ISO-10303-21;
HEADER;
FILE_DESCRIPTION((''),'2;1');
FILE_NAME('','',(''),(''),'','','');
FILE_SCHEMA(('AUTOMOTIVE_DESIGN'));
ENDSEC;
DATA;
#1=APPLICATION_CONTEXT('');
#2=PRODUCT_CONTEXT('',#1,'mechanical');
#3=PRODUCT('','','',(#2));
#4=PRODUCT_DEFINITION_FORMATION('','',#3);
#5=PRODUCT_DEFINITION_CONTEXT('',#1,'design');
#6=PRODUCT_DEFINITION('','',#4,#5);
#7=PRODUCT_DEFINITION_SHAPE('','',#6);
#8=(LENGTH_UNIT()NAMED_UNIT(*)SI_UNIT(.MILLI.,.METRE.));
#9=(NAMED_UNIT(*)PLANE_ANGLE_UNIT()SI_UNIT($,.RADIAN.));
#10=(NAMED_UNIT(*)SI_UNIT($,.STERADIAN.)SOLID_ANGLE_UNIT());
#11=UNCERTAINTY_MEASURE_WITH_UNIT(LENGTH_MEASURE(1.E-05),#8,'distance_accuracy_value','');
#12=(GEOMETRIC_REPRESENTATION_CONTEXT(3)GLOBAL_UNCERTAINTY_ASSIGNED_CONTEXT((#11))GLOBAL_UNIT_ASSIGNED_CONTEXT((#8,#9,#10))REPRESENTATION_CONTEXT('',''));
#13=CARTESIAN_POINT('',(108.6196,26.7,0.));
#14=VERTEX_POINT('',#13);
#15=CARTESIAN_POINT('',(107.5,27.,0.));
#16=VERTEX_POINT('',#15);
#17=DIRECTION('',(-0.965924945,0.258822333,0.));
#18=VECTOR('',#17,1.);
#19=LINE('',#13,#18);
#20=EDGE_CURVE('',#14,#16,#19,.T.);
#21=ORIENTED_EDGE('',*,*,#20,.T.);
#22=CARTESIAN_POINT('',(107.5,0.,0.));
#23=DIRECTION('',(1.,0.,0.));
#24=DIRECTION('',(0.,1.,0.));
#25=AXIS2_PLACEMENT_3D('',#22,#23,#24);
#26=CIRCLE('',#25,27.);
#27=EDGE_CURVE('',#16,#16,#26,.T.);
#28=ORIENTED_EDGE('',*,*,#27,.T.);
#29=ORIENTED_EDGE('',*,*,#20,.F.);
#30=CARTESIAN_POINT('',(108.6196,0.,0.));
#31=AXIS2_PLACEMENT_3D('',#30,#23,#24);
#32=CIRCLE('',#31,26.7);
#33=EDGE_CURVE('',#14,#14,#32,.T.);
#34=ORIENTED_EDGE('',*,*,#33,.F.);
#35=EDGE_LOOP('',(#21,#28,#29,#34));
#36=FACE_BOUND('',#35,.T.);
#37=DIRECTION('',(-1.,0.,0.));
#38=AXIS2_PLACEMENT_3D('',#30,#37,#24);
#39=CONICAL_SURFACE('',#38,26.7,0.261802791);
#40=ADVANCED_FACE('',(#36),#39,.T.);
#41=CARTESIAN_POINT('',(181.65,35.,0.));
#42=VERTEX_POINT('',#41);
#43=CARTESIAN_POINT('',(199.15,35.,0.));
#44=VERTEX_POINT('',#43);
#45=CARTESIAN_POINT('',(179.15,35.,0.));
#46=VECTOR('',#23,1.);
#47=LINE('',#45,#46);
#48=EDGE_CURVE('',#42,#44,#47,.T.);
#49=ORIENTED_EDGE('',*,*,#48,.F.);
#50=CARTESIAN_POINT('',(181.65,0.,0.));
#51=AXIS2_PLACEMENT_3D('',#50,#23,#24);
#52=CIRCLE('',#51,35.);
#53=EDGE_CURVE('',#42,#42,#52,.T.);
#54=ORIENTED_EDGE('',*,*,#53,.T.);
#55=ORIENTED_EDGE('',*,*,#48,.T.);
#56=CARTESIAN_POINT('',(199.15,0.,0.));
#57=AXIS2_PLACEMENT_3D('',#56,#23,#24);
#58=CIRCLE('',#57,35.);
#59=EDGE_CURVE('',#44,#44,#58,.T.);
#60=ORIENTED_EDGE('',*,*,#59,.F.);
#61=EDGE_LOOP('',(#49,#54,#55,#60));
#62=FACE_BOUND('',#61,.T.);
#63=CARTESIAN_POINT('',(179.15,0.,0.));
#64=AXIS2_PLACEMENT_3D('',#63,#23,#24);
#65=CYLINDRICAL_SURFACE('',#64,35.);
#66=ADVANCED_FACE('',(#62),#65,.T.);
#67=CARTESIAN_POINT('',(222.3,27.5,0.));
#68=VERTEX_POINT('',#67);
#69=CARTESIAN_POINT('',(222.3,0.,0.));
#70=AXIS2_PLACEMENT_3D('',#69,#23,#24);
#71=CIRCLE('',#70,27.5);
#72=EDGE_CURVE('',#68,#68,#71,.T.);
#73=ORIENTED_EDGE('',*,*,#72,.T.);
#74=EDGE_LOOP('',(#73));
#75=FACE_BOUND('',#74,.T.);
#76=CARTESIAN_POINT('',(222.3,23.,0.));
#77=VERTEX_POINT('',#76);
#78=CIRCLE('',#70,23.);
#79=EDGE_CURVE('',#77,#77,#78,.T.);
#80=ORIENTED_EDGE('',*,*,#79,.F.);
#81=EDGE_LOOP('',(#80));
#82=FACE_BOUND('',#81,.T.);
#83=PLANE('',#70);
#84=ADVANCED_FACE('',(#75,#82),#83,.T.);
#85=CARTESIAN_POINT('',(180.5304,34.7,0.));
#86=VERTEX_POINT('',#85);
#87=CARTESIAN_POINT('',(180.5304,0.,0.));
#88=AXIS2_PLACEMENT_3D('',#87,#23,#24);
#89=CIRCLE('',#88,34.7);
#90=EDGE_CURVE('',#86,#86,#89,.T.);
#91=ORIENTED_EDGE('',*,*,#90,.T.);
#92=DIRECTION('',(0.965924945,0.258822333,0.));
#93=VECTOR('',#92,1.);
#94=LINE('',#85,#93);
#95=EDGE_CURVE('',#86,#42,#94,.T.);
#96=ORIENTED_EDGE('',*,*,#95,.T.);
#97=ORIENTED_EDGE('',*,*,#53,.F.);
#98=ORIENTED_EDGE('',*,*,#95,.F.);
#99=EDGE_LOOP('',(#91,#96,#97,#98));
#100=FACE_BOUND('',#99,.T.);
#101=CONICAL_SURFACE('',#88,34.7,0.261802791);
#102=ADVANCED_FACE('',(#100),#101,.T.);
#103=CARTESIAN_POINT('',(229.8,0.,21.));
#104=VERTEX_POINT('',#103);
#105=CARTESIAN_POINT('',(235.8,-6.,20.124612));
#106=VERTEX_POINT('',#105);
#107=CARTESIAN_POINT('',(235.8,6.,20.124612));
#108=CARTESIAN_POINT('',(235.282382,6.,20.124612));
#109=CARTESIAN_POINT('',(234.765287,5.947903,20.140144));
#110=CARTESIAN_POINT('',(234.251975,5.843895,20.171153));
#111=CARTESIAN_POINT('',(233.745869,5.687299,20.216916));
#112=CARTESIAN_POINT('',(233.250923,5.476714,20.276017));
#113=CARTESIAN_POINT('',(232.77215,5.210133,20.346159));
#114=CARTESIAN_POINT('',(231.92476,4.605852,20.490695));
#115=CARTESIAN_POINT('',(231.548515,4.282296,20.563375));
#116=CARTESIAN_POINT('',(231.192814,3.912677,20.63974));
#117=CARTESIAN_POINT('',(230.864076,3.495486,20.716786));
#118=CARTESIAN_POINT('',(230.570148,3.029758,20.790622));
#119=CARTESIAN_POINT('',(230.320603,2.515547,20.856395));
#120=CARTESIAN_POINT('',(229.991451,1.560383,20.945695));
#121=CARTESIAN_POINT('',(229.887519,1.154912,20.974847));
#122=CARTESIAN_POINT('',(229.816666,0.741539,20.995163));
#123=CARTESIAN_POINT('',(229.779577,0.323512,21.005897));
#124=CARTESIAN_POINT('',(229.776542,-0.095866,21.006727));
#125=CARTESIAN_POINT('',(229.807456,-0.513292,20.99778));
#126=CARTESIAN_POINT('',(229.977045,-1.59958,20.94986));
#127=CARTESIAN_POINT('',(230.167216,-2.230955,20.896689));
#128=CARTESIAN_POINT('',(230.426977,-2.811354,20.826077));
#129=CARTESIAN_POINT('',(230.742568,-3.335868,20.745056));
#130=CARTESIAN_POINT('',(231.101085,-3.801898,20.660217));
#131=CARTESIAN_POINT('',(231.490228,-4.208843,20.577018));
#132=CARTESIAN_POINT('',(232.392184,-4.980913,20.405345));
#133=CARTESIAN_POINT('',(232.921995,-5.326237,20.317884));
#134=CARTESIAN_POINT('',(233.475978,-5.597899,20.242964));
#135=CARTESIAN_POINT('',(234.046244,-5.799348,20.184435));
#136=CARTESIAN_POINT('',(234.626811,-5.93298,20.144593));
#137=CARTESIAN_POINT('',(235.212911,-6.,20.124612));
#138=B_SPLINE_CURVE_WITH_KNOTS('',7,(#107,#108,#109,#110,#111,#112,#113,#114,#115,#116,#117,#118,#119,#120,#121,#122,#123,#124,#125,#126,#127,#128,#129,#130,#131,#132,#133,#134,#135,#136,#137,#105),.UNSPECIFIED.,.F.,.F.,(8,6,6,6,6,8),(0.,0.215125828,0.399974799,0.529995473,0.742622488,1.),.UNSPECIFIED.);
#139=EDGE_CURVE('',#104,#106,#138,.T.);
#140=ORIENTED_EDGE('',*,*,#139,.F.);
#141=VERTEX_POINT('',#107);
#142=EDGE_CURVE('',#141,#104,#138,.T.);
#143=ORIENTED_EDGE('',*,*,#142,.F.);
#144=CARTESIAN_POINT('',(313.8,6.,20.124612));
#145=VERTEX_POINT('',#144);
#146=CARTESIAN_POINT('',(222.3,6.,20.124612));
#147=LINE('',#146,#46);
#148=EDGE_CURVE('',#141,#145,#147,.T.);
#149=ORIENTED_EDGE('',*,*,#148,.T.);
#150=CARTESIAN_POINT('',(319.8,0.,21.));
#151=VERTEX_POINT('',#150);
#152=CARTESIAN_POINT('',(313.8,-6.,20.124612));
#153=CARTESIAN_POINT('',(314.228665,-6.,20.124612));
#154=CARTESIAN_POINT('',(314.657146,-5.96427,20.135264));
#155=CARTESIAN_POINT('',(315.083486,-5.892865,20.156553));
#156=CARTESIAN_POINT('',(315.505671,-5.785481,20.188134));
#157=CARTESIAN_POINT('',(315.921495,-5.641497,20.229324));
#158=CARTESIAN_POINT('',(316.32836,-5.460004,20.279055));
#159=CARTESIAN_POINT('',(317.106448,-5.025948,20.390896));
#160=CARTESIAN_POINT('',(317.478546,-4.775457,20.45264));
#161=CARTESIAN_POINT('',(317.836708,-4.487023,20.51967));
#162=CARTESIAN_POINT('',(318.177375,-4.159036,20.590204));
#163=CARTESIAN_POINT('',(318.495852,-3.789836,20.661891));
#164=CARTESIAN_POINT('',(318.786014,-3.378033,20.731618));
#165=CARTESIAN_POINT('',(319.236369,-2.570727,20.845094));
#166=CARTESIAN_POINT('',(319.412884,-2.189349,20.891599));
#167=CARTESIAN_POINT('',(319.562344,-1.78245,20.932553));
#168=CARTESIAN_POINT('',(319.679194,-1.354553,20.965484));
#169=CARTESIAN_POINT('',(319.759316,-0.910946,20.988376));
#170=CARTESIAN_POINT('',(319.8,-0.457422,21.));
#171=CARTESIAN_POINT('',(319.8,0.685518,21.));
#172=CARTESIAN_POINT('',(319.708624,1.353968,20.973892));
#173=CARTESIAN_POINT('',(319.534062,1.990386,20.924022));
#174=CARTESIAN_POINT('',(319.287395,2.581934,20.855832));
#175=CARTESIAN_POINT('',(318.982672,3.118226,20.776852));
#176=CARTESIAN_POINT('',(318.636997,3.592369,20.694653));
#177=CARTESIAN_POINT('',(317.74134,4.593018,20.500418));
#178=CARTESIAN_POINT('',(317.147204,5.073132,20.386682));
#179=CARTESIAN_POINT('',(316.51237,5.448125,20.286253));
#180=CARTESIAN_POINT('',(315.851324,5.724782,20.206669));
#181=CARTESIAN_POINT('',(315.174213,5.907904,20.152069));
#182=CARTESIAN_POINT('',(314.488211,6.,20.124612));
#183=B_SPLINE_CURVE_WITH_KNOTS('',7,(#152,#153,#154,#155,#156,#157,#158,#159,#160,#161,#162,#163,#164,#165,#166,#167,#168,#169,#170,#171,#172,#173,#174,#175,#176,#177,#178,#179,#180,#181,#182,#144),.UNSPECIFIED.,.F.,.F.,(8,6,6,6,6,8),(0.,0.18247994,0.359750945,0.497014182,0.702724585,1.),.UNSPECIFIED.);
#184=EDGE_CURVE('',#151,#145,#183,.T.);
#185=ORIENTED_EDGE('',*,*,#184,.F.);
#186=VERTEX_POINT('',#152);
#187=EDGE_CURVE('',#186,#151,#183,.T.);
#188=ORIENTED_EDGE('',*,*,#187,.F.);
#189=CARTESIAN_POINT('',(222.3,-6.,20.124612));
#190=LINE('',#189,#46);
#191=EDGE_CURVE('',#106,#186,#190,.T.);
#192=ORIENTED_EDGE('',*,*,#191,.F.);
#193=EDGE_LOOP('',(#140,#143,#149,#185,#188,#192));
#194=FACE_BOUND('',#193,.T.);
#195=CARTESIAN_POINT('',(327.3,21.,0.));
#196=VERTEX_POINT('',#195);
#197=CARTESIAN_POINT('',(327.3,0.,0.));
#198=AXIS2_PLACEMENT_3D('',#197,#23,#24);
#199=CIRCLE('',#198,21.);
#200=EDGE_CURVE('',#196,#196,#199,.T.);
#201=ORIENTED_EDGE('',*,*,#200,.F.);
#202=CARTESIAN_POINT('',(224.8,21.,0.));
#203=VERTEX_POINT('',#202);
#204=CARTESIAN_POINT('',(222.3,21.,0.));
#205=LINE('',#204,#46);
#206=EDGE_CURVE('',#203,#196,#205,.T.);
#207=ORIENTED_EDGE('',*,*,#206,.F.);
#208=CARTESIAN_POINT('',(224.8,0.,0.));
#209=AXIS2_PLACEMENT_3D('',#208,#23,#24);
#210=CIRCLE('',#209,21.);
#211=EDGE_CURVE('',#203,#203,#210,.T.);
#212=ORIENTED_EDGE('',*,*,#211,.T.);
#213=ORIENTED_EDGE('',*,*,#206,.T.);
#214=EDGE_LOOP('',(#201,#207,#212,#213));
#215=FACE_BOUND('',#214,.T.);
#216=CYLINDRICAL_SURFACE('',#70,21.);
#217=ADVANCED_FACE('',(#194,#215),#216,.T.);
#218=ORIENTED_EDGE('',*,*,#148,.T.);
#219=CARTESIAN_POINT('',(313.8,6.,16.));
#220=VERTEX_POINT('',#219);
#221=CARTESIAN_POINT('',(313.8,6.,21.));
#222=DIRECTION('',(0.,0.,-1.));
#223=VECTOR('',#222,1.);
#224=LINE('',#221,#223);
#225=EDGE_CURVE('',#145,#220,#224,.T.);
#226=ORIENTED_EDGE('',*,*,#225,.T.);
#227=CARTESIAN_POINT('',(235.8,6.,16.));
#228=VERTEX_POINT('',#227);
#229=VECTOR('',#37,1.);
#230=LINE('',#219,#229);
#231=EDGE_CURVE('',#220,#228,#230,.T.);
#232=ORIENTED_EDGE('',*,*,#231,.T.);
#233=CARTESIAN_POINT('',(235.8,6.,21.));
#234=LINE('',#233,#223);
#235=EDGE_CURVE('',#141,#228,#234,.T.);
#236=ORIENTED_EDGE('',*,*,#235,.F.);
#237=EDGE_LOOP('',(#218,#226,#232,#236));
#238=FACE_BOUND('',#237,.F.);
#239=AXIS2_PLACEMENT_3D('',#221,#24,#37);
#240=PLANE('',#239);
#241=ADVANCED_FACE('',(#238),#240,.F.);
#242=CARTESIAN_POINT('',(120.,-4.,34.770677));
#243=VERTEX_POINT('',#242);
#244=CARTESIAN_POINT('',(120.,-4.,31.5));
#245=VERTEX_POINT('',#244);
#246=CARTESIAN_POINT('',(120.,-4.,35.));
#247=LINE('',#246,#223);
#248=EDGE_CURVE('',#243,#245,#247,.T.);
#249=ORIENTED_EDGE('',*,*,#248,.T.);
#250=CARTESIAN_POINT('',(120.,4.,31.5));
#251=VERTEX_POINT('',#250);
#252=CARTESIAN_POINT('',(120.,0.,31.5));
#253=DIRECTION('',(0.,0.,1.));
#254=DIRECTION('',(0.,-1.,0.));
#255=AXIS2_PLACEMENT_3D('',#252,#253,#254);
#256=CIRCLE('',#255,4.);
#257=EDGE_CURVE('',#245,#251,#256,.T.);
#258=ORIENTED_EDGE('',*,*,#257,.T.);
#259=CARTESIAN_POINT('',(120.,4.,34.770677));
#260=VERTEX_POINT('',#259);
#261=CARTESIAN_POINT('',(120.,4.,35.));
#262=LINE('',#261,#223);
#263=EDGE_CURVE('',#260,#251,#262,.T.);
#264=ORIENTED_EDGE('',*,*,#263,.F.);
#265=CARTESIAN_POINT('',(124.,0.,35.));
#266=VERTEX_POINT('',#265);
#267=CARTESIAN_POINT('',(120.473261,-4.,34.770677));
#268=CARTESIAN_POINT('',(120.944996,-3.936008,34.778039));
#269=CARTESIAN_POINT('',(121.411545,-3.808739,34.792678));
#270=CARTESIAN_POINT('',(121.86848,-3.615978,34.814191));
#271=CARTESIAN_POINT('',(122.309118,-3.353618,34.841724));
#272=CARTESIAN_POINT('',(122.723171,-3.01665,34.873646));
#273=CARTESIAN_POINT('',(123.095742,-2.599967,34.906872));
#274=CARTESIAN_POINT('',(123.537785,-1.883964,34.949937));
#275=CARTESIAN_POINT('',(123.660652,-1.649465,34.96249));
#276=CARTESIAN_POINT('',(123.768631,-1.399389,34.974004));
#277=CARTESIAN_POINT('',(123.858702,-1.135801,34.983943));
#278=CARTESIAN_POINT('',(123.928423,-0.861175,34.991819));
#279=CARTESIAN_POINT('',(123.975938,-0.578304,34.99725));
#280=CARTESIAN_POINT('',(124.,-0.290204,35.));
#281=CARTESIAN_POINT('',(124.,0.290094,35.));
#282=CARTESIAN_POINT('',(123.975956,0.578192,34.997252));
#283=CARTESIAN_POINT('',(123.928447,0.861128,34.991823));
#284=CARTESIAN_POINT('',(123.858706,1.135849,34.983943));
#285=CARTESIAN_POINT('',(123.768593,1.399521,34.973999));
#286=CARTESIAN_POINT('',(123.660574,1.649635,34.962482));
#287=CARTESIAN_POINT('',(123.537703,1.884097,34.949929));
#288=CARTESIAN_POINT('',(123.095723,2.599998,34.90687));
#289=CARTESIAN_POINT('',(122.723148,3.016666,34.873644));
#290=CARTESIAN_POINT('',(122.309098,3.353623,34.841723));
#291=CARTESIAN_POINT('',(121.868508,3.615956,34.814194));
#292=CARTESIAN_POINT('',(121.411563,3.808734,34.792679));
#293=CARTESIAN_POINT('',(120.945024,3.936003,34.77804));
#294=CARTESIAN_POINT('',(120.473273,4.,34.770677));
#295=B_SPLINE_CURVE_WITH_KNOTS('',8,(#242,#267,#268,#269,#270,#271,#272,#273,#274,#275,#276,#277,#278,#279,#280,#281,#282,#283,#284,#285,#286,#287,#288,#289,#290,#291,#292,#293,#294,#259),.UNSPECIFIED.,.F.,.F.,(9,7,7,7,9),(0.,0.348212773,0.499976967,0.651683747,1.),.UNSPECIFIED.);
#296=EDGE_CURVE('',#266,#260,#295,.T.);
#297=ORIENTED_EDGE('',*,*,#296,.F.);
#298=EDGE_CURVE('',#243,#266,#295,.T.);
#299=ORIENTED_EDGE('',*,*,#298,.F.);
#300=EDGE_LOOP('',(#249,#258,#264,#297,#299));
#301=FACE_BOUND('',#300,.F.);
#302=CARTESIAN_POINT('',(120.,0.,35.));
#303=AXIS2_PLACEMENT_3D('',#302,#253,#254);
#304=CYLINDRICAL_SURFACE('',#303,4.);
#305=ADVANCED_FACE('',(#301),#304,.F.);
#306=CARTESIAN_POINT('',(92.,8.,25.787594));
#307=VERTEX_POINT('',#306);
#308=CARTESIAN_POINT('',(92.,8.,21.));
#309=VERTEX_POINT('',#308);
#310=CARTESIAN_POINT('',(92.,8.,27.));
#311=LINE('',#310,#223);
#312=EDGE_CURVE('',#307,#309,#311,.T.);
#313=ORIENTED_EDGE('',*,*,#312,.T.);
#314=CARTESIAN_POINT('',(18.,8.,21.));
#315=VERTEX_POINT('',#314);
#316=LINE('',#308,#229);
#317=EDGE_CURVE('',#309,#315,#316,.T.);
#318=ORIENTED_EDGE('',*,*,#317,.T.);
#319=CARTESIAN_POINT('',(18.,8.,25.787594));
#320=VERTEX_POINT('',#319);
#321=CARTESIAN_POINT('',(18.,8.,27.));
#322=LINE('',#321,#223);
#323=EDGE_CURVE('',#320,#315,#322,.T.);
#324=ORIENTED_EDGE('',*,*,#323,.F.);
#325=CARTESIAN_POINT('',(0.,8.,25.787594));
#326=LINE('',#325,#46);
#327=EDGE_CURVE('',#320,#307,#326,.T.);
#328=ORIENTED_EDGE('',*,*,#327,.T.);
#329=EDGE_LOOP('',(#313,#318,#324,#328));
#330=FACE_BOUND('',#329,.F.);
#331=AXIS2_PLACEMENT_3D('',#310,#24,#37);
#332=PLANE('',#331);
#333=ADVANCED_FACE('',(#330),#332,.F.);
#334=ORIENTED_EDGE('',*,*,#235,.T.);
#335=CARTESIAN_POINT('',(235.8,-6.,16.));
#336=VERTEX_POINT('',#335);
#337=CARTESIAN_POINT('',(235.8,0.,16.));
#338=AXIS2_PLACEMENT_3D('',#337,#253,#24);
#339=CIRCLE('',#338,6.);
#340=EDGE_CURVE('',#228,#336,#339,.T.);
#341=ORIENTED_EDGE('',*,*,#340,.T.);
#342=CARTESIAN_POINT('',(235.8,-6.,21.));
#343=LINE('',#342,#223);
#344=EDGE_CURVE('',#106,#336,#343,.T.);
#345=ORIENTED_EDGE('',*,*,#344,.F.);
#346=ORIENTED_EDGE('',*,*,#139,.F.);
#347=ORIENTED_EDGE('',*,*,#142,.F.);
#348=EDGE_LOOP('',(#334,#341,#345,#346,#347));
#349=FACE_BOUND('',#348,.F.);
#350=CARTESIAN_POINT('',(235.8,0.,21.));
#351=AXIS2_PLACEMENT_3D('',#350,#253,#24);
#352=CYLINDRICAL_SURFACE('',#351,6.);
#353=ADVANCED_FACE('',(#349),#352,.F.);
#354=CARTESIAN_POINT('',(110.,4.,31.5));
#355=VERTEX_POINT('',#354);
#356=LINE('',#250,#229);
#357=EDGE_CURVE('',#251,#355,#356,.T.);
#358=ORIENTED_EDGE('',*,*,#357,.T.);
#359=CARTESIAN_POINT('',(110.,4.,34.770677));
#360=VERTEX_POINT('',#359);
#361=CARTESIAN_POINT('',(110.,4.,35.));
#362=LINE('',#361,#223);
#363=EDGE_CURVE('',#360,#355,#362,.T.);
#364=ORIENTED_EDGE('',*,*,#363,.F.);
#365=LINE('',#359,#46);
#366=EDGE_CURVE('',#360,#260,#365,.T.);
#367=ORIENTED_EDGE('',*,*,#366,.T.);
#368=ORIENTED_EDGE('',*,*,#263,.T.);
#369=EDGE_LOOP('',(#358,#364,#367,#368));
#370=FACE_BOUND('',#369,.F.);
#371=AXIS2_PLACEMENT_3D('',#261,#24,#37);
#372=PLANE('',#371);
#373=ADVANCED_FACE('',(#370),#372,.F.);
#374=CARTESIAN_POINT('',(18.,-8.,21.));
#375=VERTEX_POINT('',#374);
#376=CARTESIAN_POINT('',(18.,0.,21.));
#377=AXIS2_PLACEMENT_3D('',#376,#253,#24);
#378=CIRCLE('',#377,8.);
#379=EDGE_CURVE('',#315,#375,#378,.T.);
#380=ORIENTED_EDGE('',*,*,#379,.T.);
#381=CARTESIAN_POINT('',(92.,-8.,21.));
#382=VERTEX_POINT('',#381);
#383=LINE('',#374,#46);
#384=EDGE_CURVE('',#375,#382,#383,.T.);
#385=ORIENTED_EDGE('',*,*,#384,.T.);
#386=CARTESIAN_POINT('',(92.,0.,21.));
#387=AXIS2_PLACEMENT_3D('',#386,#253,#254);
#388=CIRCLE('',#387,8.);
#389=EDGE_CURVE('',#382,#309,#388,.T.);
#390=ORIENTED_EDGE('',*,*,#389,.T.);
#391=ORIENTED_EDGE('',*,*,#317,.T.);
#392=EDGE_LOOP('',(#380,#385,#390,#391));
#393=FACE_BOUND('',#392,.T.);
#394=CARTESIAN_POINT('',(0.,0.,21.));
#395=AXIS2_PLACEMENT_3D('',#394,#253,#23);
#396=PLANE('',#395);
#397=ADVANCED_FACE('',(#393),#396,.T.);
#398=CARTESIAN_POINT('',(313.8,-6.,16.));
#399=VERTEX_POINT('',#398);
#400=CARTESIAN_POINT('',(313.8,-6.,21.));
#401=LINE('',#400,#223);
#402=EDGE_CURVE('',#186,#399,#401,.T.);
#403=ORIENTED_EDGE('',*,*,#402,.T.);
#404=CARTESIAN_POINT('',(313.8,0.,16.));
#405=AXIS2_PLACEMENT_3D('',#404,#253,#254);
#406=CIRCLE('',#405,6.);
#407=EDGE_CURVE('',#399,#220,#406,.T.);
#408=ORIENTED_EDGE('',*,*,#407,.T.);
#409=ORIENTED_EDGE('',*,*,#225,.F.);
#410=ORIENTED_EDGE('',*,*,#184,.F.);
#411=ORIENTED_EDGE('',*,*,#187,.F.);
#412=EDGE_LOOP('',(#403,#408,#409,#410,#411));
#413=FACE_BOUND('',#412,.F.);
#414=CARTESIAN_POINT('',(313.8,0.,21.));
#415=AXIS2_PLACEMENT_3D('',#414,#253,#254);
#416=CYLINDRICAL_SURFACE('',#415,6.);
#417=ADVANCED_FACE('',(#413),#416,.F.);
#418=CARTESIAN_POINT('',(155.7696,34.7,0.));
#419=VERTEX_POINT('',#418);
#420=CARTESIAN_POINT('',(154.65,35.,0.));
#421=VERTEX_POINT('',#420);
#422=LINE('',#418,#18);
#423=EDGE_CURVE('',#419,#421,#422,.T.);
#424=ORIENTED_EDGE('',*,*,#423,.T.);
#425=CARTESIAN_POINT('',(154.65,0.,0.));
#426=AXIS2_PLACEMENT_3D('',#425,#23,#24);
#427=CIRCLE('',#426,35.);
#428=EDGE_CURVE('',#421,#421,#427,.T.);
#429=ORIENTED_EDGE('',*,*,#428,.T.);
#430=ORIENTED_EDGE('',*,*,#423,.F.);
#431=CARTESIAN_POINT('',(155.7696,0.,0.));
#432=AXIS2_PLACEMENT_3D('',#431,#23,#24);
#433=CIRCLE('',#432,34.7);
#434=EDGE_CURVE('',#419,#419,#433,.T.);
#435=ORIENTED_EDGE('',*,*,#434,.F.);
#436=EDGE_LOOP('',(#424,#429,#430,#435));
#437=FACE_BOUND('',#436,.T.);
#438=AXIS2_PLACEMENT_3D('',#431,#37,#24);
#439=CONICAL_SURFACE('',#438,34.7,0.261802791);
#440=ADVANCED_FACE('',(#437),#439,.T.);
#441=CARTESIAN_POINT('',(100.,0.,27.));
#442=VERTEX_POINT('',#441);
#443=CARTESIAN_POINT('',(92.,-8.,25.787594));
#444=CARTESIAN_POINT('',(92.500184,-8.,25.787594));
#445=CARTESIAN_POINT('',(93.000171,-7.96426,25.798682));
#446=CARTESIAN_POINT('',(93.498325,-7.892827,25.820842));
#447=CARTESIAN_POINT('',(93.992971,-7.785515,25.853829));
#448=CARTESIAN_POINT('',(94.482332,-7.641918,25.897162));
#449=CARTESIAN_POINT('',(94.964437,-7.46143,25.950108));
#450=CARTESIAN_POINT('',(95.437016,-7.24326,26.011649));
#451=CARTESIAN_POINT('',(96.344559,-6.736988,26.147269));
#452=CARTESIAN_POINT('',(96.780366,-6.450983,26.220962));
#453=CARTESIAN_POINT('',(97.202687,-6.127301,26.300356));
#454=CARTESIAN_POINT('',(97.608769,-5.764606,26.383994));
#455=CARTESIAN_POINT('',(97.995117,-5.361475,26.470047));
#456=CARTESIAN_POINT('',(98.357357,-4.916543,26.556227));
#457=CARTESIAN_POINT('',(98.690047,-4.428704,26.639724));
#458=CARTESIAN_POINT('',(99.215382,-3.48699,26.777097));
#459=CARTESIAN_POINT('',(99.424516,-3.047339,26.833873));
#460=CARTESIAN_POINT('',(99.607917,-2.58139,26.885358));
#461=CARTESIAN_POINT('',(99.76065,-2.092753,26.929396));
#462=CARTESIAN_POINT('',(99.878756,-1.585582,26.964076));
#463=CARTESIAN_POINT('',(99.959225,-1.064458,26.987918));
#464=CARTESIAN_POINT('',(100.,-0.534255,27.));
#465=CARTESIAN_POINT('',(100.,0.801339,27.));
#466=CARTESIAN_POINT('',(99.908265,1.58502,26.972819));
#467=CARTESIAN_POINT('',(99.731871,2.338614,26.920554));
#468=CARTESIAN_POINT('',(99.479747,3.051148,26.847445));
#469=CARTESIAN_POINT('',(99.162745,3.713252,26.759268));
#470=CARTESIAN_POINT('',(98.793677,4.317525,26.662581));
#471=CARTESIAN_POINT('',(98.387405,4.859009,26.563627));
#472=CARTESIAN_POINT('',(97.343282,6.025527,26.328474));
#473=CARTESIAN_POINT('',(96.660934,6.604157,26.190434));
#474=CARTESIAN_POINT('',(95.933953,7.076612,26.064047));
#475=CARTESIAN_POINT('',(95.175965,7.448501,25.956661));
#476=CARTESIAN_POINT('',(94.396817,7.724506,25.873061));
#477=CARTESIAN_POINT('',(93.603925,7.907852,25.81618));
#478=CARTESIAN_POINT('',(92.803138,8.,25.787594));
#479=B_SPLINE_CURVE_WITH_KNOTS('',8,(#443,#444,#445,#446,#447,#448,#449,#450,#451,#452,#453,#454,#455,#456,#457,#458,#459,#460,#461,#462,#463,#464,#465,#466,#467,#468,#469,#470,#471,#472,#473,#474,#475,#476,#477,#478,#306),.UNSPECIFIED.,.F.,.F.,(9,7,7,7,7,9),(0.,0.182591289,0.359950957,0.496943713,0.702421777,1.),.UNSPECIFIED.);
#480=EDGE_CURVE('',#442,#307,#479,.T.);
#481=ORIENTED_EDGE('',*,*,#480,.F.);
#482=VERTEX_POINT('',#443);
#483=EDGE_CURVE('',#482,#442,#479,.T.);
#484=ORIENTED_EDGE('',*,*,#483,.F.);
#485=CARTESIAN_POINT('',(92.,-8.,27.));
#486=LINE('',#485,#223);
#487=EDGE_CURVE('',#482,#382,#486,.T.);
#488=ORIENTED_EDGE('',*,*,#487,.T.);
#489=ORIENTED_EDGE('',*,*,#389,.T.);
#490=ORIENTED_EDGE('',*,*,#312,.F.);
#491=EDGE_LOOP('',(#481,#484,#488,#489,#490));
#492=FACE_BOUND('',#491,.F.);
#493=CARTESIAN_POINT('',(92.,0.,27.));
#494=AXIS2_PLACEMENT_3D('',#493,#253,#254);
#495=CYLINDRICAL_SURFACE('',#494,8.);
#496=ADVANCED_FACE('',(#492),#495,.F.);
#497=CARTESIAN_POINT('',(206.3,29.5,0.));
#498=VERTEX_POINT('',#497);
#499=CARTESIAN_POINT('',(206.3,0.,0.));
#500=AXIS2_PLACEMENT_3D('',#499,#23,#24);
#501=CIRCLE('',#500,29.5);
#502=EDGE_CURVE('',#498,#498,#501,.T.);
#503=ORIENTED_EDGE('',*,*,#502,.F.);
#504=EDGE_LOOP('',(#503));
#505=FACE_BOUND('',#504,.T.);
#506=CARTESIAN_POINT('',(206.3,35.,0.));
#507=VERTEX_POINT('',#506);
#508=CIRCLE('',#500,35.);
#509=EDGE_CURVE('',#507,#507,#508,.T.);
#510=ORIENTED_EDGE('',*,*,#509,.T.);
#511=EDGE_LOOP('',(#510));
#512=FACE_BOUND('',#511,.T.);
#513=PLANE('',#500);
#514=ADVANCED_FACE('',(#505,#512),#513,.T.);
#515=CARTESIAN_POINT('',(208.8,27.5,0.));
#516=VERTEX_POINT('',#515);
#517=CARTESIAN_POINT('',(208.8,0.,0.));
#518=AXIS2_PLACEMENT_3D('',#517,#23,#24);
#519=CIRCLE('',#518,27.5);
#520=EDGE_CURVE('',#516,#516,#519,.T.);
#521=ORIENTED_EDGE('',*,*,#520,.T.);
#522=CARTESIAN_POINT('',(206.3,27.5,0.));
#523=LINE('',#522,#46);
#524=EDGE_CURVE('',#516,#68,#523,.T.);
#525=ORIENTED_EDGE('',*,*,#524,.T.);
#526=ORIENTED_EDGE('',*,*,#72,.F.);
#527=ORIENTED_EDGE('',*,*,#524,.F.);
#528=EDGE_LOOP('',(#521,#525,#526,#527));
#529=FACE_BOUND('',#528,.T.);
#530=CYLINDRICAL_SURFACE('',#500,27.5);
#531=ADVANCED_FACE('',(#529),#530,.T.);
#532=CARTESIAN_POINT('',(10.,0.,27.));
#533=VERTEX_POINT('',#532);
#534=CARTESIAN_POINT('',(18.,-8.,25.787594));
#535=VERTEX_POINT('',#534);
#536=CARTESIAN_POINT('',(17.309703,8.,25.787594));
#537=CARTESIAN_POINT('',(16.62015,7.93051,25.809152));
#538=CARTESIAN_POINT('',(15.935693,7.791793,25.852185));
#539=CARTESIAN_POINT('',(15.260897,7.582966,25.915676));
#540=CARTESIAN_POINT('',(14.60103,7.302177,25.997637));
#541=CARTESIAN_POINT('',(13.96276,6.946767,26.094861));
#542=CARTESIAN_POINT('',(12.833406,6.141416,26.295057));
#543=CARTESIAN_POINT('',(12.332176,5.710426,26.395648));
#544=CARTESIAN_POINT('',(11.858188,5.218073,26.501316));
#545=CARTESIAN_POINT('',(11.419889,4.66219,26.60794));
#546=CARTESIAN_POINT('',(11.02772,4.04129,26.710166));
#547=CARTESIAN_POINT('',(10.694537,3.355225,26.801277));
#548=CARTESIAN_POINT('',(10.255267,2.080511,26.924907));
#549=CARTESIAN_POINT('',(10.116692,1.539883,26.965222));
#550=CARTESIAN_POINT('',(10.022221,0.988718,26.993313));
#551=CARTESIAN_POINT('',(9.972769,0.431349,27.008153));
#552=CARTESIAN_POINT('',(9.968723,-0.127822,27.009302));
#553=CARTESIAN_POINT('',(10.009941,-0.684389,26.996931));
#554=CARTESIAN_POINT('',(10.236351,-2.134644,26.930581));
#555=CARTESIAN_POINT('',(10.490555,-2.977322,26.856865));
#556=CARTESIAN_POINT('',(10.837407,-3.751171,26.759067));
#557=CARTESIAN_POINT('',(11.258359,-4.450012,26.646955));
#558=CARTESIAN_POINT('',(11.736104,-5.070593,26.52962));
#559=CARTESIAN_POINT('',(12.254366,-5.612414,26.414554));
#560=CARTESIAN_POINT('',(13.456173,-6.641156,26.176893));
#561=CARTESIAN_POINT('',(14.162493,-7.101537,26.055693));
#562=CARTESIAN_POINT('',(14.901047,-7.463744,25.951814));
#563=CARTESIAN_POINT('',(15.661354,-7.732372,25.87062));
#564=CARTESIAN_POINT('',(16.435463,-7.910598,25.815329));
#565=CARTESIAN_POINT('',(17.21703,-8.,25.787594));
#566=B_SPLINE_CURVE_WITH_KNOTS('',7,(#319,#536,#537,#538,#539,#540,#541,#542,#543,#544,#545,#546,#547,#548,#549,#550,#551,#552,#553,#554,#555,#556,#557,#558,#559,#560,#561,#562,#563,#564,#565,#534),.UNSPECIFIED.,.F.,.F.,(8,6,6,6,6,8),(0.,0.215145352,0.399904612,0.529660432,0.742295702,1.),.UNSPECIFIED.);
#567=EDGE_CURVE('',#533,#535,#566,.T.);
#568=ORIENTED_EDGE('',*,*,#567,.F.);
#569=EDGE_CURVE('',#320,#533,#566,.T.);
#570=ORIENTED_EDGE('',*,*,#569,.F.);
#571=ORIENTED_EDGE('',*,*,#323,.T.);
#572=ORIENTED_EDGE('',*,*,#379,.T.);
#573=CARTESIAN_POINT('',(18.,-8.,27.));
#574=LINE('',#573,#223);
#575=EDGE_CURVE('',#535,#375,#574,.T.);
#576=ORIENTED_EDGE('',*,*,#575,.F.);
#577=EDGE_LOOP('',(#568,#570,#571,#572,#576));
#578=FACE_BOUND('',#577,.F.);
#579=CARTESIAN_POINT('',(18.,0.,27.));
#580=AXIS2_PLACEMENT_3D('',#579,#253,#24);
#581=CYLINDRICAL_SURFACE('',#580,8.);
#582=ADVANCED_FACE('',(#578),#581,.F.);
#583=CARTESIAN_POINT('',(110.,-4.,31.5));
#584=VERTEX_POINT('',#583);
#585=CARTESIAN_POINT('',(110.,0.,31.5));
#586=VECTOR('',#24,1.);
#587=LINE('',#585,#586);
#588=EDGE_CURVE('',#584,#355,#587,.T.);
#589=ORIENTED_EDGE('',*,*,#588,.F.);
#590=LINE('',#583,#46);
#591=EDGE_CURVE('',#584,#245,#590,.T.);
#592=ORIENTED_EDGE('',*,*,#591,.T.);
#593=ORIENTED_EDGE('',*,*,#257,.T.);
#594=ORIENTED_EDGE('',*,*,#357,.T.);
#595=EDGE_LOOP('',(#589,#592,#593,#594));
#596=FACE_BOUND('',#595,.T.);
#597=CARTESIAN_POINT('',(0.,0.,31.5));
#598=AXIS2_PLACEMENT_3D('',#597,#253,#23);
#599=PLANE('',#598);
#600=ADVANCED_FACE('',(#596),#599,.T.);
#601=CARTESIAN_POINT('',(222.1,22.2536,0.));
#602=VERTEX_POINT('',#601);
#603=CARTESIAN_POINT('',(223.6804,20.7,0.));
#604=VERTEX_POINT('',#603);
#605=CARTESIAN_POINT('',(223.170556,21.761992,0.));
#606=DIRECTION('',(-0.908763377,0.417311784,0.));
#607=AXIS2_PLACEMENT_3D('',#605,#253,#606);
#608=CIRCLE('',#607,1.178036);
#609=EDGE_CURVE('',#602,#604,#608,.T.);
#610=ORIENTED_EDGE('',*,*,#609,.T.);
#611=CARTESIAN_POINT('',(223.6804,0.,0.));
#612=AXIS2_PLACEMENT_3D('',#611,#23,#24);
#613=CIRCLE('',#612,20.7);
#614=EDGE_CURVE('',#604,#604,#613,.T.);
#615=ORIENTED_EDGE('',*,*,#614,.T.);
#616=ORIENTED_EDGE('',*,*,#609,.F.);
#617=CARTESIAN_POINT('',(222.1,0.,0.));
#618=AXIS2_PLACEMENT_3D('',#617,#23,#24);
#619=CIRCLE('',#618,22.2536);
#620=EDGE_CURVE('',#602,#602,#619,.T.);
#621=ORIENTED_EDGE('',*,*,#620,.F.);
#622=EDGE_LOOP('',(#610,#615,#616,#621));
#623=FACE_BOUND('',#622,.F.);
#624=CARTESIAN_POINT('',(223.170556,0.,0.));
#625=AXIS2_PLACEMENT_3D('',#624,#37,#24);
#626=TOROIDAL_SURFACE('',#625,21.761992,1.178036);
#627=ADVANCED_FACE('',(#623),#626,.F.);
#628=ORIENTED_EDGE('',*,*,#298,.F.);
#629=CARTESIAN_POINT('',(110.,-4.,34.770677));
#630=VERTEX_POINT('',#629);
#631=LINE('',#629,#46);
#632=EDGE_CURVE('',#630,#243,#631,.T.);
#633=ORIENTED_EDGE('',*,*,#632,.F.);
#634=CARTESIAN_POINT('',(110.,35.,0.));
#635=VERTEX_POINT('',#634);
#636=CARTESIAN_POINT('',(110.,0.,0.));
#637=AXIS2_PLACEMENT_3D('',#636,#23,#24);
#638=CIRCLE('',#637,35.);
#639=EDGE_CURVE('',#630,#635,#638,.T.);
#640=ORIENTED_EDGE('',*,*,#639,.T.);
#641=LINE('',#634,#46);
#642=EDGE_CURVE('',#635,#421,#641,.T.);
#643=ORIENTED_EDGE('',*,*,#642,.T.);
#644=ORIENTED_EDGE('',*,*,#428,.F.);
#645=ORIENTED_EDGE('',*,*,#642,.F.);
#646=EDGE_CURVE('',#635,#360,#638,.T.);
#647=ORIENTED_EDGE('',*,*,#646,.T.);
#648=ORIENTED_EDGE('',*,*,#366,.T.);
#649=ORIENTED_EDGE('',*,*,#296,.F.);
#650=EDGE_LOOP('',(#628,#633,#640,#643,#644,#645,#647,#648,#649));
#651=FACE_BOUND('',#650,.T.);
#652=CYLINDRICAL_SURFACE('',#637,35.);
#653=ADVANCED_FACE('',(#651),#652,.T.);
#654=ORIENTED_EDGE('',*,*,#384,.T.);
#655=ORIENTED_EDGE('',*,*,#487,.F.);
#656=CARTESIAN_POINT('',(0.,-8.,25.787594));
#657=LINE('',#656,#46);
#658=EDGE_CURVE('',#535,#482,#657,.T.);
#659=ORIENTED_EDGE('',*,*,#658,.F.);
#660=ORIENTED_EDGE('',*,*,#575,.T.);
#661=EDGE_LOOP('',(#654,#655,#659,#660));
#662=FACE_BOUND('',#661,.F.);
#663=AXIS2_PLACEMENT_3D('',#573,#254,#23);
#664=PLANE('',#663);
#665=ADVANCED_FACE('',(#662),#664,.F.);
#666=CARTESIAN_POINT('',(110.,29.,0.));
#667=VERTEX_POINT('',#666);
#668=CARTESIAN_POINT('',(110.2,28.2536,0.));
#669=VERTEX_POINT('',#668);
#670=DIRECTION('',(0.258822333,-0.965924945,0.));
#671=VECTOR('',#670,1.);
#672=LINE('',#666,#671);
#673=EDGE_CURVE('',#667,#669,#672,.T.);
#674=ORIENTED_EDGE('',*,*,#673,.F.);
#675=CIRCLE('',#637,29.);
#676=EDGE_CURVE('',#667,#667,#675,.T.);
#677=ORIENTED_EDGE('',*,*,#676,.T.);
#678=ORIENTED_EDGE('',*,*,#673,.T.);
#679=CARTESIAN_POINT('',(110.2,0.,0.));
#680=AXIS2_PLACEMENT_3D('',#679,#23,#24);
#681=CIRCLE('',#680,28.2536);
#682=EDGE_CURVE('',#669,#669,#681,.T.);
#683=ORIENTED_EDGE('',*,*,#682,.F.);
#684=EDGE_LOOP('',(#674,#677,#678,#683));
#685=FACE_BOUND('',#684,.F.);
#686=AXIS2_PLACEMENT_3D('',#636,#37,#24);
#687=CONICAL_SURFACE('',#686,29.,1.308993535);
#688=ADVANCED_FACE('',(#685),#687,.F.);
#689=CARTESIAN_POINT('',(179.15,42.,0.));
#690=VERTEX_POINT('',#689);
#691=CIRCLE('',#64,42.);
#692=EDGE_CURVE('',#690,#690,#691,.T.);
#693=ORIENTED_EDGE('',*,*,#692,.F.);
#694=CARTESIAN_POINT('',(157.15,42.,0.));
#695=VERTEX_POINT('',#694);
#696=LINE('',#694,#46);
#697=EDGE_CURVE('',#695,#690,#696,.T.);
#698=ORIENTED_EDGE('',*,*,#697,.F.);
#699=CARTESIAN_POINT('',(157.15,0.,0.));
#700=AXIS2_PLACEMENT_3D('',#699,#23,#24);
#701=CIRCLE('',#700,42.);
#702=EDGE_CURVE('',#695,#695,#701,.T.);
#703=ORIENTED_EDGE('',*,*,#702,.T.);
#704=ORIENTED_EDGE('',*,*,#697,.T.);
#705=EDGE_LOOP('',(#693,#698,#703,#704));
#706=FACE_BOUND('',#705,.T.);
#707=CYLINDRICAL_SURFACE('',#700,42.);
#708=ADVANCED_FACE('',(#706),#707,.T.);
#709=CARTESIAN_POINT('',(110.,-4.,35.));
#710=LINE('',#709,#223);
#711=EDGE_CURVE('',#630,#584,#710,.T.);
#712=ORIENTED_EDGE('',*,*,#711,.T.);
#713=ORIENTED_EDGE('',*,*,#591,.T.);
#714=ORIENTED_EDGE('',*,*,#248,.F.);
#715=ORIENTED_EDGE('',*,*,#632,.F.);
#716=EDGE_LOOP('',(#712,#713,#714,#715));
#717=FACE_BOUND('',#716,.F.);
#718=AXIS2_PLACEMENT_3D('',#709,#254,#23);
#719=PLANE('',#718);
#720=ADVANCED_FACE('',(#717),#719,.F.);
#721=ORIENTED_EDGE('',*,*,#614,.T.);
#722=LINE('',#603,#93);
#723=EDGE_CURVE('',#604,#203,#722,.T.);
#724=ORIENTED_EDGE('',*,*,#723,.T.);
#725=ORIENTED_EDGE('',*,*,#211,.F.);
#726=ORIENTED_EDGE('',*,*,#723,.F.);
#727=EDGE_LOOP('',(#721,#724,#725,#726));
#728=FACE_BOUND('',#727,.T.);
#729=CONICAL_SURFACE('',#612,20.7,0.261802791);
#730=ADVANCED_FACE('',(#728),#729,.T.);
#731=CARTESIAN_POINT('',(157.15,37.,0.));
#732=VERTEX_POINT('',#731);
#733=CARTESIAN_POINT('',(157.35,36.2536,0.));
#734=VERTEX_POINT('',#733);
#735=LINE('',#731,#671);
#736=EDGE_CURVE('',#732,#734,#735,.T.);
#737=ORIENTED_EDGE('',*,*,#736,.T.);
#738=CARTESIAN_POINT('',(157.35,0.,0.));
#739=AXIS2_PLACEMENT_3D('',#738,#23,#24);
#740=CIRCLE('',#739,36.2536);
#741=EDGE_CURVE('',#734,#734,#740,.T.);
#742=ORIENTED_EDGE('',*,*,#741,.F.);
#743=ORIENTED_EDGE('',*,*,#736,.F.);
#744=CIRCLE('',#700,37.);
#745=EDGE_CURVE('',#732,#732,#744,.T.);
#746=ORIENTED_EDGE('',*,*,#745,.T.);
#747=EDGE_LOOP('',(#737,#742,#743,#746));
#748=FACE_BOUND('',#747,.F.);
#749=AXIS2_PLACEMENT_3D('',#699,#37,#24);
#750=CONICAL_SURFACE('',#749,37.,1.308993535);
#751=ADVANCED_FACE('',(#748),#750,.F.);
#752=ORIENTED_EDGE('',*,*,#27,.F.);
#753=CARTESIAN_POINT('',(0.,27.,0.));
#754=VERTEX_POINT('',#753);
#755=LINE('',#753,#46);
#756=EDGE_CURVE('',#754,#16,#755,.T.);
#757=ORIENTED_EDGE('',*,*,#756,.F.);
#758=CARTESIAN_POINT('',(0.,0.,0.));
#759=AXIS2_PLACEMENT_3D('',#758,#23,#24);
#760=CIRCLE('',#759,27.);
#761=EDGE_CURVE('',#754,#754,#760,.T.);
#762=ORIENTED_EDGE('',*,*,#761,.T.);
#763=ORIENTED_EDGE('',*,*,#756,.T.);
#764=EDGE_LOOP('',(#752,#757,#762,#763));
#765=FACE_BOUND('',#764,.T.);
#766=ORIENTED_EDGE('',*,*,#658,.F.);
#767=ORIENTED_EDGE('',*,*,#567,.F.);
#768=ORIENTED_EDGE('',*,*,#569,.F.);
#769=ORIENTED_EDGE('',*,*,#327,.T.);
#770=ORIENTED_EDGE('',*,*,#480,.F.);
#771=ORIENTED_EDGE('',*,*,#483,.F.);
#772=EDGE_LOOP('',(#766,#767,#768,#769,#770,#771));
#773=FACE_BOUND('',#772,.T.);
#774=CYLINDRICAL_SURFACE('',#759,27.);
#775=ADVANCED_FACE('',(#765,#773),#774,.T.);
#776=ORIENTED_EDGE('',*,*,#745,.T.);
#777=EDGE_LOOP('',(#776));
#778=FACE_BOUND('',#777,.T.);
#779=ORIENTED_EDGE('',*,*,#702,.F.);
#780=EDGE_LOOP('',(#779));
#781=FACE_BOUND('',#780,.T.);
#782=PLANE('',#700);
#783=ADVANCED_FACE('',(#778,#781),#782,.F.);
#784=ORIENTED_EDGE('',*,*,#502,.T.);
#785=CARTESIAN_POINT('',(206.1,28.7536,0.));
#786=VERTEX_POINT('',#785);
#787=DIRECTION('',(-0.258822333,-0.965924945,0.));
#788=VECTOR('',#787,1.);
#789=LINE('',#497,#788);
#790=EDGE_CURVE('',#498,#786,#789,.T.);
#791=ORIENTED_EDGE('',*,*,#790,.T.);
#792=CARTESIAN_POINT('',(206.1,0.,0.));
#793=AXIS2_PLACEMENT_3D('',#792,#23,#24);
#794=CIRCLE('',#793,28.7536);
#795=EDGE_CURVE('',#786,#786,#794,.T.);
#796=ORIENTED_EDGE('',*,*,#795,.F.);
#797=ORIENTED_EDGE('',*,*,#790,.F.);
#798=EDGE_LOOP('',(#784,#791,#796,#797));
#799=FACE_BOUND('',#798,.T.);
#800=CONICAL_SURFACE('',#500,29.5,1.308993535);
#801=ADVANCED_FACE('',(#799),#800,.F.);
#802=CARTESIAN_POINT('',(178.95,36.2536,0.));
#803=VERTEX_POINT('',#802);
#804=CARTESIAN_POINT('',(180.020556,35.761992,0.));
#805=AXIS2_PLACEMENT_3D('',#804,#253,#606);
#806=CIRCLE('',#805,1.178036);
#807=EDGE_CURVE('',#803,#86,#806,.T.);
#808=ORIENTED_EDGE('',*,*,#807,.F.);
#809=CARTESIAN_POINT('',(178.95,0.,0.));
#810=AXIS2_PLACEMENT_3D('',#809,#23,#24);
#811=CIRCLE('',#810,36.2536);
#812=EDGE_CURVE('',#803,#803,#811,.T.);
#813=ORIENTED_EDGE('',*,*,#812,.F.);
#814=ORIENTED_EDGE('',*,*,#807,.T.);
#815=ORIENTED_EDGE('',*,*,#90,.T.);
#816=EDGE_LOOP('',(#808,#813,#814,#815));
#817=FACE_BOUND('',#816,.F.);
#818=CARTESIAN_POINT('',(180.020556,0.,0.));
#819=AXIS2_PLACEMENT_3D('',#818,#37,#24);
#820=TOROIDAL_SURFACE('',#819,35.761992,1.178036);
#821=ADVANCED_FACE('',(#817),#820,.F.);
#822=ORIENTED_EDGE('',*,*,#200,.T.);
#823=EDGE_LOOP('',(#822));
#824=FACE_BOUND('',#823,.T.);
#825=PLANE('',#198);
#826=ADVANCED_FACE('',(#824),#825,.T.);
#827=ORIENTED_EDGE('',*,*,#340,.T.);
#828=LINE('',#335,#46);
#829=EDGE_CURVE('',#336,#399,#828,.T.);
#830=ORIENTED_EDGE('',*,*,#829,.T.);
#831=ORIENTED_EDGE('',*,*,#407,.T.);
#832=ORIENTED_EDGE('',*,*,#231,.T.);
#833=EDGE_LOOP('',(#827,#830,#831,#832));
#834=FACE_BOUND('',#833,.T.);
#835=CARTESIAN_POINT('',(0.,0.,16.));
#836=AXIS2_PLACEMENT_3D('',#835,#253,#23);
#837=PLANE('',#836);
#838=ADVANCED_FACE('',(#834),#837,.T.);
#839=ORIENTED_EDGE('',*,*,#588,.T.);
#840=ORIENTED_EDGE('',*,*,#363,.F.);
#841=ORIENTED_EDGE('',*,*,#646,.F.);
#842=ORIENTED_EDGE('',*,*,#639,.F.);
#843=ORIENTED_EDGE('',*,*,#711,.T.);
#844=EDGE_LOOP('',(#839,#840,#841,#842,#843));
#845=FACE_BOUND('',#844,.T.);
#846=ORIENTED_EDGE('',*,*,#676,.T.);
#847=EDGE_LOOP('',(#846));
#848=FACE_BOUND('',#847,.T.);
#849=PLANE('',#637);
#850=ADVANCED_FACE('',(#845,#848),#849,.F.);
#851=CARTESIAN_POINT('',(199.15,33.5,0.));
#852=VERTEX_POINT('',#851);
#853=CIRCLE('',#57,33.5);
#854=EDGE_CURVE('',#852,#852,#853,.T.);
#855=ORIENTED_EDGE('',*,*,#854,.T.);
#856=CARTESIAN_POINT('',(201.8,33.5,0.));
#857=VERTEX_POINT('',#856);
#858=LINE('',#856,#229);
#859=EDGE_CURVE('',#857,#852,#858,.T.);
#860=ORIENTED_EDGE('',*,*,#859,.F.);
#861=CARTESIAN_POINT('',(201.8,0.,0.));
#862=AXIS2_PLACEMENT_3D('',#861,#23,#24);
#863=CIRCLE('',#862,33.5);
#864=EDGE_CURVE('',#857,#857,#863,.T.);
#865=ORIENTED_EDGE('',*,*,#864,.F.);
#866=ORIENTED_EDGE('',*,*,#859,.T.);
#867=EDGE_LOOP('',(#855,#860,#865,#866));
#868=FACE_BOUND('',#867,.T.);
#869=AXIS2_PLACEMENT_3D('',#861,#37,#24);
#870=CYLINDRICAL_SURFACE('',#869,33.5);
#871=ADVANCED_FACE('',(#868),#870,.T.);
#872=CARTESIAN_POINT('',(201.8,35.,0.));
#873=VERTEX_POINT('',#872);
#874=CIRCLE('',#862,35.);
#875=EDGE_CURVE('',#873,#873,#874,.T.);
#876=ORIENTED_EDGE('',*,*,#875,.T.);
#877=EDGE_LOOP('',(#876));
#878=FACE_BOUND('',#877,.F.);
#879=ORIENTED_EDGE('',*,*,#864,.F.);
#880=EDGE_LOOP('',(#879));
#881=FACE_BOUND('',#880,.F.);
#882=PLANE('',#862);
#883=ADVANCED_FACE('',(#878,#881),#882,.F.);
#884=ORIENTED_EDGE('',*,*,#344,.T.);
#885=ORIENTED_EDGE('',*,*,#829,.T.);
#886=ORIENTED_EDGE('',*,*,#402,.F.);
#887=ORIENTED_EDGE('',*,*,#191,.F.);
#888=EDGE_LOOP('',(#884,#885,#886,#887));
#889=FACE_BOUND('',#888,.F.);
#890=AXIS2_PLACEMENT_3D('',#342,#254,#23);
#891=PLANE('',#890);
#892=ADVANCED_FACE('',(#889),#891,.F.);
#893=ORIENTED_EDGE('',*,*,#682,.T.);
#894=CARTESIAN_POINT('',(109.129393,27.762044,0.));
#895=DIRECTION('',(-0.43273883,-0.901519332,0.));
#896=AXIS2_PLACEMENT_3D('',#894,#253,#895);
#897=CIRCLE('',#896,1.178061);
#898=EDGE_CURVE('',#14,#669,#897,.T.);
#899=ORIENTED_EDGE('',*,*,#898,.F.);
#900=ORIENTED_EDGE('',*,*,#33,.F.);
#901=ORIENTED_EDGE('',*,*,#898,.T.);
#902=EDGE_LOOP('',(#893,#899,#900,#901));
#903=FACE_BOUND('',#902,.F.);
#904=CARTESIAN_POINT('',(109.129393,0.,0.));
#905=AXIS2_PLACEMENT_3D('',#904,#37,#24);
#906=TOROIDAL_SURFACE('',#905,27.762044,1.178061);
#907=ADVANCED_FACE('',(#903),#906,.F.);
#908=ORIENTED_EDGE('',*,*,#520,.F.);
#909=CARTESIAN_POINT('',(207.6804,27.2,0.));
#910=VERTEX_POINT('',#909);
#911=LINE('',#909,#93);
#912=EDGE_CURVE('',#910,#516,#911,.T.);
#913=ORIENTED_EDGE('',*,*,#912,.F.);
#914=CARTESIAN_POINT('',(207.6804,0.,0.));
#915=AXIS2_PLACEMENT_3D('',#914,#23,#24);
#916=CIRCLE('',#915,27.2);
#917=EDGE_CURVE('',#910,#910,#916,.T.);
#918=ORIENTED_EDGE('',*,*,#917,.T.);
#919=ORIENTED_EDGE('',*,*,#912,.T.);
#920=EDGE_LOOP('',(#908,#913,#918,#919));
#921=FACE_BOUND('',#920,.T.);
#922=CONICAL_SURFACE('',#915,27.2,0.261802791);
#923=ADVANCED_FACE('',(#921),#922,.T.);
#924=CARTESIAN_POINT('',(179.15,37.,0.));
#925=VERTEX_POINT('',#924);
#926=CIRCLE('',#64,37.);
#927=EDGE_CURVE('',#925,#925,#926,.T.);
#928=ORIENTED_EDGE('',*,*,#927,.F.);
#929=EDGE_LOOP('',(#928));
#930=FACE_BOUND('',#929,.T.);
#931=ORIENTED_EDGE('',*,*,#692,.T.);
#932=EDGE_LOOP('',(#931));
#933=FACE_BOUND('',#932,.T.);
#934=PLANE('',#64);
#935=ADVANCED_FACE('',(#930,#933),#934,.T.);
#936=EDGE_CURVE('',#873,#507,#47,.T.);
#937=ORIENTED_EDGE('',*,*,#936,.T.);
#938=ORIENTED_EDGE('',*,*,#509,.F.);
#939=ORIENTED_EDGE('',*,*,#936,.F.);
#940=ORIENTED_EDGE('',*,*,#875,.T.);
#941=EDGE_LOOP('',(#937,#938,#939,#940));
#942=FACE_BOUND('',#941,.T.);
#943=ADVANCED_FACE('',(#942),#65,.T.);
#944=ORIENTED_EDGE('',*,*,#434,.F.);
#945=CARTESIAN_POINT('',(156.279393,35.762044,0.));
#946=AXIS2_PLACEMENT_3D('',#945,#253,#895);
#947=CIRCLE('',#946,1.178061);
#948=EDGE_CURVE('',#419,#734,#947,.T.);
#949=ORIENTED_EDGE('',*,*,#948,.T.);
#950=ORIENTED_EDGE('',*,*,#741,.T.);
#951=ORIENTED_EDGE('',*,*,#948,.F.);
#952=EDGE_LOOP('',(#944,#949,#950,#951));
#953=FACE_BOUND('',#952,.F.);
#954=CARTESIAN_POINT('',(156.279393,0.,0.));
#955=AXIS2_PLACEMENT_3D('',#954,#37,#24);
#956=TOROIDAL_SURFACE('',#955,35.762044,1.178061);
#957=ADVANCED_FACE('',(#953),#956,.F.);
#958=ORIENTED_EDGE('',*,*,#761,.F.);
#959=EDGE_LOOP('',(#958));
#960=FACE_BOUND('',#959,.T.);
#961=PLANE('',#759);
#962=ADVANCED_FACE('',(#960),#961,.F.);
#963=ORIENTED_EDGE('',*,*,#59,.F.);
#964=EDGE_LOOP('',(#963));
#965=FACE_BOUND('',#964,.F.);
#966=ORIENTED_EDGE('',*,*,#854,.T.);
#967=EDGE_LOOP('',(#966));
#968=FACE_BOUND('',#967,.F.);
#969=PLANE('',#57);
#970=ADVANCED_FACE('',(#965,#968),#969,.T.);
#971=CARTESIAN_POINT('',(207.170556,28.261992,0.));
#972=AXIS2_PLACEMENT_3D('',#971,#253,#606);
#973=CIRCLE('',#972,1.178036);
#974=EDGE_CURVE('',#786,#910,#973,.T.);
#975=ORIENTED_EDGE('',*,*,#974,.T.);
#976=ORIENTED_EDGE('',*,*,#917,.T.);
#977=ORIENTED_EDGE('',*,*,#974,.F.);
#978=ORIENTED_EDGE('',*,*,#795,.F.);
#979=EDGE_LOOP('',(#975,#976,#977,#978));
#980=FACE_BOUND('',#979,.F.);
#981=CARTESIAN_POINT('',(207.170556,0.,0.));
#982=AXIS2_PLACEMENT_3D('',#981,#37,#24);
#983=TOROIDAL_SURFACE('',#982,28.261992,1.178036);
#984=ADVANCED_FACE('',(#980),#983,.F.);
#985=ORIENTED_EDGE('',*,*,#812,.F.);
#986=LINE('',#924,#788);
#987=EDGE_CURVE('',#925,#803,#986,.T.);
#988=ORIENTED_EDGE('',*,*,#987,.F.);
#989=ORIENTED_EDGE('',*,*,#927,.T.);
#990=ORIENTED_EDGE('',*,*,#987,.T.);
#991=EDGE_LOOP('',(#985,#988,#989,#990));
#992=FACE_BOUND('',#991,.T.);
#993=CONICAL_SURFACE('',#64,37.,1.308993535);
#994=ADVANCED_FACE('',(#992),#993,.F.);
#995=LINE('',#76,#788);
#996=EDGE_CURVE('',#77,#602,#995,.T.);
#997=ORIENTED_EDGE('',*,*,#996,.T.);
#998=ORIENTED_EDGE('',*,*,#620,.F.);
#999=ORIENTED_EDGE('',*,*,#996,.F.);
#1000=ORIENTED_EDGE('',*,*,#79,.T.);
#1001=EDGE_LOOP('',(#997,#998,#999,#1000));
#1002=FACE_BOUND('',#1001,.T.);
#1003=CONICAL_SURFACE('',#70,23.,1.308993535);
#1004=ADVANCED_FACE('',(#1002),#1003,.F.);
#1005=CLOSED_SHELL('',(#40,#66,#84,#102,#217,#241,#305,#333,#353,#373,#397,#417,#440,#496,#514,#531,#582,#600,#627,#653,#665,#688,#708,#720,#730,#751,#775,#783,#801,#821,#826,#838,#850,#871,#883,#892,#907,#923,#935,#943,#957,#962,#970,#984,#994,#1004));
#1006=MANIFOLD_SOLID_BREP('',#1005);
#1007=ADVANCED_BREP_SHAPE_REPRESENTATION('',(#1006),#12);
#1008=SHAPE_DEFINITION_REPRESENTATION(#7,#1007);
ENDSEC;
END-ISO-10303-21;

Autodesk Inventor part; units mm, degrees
ref_plane "YZ Plane" through (0, 0, 0) normal (1, 0, 0) x (0, 1, 0)
ref_plane "XZ Plane" through (0, 0, 0) normal (0, 1, 0) x (-1, 0, 0)
sketch "Skizze32" plane through (0, 0, 0) normal (0, 0, 1) x (1, 0, 0)
  line L0 (0, 0) -> (0, 27)
  line L1 (0, 27) -> (110, 27)
  line L2 (110, 27) -> (110, 35)
  line L3 (110, 35) -> (157.15, 35)
  line L4 (157.15, 35) -> (157.15, 42)
  line L5 (157.15, 42) -> (179.15, 42)
  line L6 (179.15, 42) -> (179.15, 35)
  line L7 (179.15, 35) -> (206.3, 35)
  line L8 (206.3, 35) -> (206.3, 27.5)
  line L9 (206.3, 27.5) -> (222.3, 27.5)
  line L10 (222.3, 27.5) -> (222.3, 21)
  line L11 (222.3, 21) -> (327.3, 21)
  line L12 (327.3, 21) -> (327.3, 0)
  line L13 (327.3, 0) -> (0, 0)
  line L14 (-65.46, 0) -> (392.76, 0) projected
revolve "Umdrehung28" add sketch "Skizze32" angle 360 about axis through (-10, 0, 0) along (1, 0, 0)
ref_plane "Arbeitsebene5" through (0, 0, 27) normal (0, 0, 1) x (1, 0, 0)
sketch "Skizze33" plane through (0, 0, 27) normal (0, 0, 1) x (1, 0, 0)
  line L0 (10, 0) -> (100, 0) construction
  line L1 (18, -8) -> (92, -8)
  line L2 (92, 8) -> (18, 8)
  arc A0 (18, 8) -> (18, -8) centre (18, 0) ccw
  arc A1 (92, -8) -> (92, 8) centre (92, 0) ccw
  point P0 (55, 0)
extrude "Extrusion5" cut sketch "Skizze33" against normal blind 6
sketch "Skizze34" plane through (0, 0, 0) normal (0, 0, 1) x (1, 0, 0)
  line L0 (110, 29) -> (110.2, 28.2536)
  line L1 (108.6196, 26.7) -> (107.5, 27)
  line L2 (107.5, 27) -> (107.5, 29)
  line L3 (107.5, 29) -> (110, 29)
  arc A0 (108.6196, 26.7) -> (110.2, 28.2536) centre (109.1294, 27.762) ccw
  line L4 (-65.46, 0) -> (392.76, 0) projected
revolve "Umdrehung29" cut sketch "Skizze34" angle 360 about axis through (-10, 0, 0) along (1, 0, 0)
sketch "Skizze35" plane through (0, 0, 0) normal (0, 0, 1) x (1, 0, 0)
  line L0 (157.15, 37) -> (157.35, 36.2536)
  line L1 (155.7696, 34.7) -> (154.65, 35)
  line L2 (154.65, 35) -> (154.65, 37)
  line L3 (154.65, 37) -> (157.15, 37)
  arc A0 (155.7696, 34.7) -> (157.35, 36.2536) centre (156.2794, 35.762) ccw
  line L4 (-65.46, 0) -> (392.76, 0) projected
revolve "Umdrehung30" cut sketch "Skizze35" angle 360 about axis through (-10, 0, 0) along (1, 0, 0)
thread "Gewinde1" size "M70x2" class "6g" standard "ISO Metric profile" length 14
ref_plane "Arbeitsebene6" through (0, 0, 35) normal (0, 0, 1) x (1, 0, 0)
sketch "Skizze36" plane through (0, 0, 35) normal (0, 0, 1) x (1, 0, 0)
  line L0 (106, 0) -> (124, 0) construction
  line L1 (110, -4) -> (120, -4)
  line L2 (120, 4) -> (110, 4)
  arc A0 (110, 4) -> (110, -4) centre (110, 0) ccw
  arc A1 (120, -4) -> (120, 4) centre (120, 0) ccw
  point P0 (115, 0)
extrude "Extrusion6" cut sketch "Skizze36" against normal blind 3.5
sketch "Skizze37" plane through (0, 0, 0) normal (0, 0, 1) x (1, 0, 0)
  line L0 (201.8, 33.5) -> (199.15, 33.5)
  line L1 (199.15, 33.5) -> (199.15, 35)
  line L2 (199.15, 35) -> (201.8, 35)
  line L3 (201.8, 35) -> (201.8, 33.5)
  line L4 (-65.46, 0) -> (392.76, 0) projected
revolve "Umdrehung31" cut sketch "Skizze37" angle 360 about axis through (-10, 0, 0) along (1, 0, 0)
sketch "Skizze38" plane through (0, 0, 0) normal (0, 0, 1) x (1, 0, 0)
  line L0 (179.15, 37) -> (178.95, 36.2536)
  line L1 (180.5304, 34.7) -> (181.65, 35)
  line L2 (181.65, 35) -> (181.65, 37)
  line L3 (181.65, 37) -> (179.15, 37)
  arc A0 (178.95, 36.2536) -> (180.5304, 34.7) centre (180.0206, 35.762) ccw
  line L4 (-65.46, 0) -> (392.76, 0) projected
revolve "Umdrehung32" cut sketch "Skizze38" angle 360 about axis through (-10, 0, 0) along (1, 0, 0)
sketch "Skizze39" plane through (0, 0, 0) normal (0, 0, 1) x (1, 0, 0)
  line L0 (206.3, 29.5) -> (206.1, 28.7536)
  line L1 (207.6804, 27.2) -> (208.8, 27.5)
  line L2 (208.8, 27.5) -> (208.8, 29.5)
  line L3 (208.8, 29.5) -> (206.3, 29.5)
  arc A0 (206.1, 28.7536) -> (207.6804, 27.2) centre (207.1706, 28.262) ccw
  line L4 (-65.46, 0) -> (392.76, 0) projected
revolve "Umdrehung33" cut sketch "Skizze39" angle 360 about axis through (-10, 0, 0) along (1, 0, 0)
ref_plane "Arbeitsebene7" through (0, 0, 21) normal (0, 0, 1) x (1, 0, 0)
sketch "Skizze40" plane through (0, 0, 21) normal (0, 0, 1) x (1, 0, 0)
  line L0 (229.8, 0) -> (319.8, 0) construction
  line L1 (235.8, -6) -> (313.8, -6)
  line L2 (313.8, 6) -> (235.8, 6)
  arc A0 (235.8, 6) -> (235.8, -6) centre (235.8, 0) ccw
  arc A1 (313.8, -6) -> (313.8, 6) centre (313.8, 0) ccw
  point P0 (274.8, 0)
extrude "Extrusion7" cut sketch "Skizze40" against normal blind 5
sketch "Skizze41" plane through (0, 0, 0) normal (0, 0, 1) x (1, 0, 0)
  line L0 (222.3, 23) -> (222.1, 22.2536)
  line L1 (223.6804, 20.7) -> (224.8, 21)
  line L2 (224.8, 21) -> (224.8, 23)
  line L3 (224.8, 23) -> (222.3, 23)
  arc A0 (222.1, 22.2536) -> (223.6804, 20.7) centre (223.1706, 21.762) ccw
  line L4 (-65.46, 0) -> (392.76, 0) projected
revolve "Umdrehung34" cut sketch "Skizze41" angle 360 about axis through (-10, 0, 0) along (1, 0, 0)
properties part number "4"
